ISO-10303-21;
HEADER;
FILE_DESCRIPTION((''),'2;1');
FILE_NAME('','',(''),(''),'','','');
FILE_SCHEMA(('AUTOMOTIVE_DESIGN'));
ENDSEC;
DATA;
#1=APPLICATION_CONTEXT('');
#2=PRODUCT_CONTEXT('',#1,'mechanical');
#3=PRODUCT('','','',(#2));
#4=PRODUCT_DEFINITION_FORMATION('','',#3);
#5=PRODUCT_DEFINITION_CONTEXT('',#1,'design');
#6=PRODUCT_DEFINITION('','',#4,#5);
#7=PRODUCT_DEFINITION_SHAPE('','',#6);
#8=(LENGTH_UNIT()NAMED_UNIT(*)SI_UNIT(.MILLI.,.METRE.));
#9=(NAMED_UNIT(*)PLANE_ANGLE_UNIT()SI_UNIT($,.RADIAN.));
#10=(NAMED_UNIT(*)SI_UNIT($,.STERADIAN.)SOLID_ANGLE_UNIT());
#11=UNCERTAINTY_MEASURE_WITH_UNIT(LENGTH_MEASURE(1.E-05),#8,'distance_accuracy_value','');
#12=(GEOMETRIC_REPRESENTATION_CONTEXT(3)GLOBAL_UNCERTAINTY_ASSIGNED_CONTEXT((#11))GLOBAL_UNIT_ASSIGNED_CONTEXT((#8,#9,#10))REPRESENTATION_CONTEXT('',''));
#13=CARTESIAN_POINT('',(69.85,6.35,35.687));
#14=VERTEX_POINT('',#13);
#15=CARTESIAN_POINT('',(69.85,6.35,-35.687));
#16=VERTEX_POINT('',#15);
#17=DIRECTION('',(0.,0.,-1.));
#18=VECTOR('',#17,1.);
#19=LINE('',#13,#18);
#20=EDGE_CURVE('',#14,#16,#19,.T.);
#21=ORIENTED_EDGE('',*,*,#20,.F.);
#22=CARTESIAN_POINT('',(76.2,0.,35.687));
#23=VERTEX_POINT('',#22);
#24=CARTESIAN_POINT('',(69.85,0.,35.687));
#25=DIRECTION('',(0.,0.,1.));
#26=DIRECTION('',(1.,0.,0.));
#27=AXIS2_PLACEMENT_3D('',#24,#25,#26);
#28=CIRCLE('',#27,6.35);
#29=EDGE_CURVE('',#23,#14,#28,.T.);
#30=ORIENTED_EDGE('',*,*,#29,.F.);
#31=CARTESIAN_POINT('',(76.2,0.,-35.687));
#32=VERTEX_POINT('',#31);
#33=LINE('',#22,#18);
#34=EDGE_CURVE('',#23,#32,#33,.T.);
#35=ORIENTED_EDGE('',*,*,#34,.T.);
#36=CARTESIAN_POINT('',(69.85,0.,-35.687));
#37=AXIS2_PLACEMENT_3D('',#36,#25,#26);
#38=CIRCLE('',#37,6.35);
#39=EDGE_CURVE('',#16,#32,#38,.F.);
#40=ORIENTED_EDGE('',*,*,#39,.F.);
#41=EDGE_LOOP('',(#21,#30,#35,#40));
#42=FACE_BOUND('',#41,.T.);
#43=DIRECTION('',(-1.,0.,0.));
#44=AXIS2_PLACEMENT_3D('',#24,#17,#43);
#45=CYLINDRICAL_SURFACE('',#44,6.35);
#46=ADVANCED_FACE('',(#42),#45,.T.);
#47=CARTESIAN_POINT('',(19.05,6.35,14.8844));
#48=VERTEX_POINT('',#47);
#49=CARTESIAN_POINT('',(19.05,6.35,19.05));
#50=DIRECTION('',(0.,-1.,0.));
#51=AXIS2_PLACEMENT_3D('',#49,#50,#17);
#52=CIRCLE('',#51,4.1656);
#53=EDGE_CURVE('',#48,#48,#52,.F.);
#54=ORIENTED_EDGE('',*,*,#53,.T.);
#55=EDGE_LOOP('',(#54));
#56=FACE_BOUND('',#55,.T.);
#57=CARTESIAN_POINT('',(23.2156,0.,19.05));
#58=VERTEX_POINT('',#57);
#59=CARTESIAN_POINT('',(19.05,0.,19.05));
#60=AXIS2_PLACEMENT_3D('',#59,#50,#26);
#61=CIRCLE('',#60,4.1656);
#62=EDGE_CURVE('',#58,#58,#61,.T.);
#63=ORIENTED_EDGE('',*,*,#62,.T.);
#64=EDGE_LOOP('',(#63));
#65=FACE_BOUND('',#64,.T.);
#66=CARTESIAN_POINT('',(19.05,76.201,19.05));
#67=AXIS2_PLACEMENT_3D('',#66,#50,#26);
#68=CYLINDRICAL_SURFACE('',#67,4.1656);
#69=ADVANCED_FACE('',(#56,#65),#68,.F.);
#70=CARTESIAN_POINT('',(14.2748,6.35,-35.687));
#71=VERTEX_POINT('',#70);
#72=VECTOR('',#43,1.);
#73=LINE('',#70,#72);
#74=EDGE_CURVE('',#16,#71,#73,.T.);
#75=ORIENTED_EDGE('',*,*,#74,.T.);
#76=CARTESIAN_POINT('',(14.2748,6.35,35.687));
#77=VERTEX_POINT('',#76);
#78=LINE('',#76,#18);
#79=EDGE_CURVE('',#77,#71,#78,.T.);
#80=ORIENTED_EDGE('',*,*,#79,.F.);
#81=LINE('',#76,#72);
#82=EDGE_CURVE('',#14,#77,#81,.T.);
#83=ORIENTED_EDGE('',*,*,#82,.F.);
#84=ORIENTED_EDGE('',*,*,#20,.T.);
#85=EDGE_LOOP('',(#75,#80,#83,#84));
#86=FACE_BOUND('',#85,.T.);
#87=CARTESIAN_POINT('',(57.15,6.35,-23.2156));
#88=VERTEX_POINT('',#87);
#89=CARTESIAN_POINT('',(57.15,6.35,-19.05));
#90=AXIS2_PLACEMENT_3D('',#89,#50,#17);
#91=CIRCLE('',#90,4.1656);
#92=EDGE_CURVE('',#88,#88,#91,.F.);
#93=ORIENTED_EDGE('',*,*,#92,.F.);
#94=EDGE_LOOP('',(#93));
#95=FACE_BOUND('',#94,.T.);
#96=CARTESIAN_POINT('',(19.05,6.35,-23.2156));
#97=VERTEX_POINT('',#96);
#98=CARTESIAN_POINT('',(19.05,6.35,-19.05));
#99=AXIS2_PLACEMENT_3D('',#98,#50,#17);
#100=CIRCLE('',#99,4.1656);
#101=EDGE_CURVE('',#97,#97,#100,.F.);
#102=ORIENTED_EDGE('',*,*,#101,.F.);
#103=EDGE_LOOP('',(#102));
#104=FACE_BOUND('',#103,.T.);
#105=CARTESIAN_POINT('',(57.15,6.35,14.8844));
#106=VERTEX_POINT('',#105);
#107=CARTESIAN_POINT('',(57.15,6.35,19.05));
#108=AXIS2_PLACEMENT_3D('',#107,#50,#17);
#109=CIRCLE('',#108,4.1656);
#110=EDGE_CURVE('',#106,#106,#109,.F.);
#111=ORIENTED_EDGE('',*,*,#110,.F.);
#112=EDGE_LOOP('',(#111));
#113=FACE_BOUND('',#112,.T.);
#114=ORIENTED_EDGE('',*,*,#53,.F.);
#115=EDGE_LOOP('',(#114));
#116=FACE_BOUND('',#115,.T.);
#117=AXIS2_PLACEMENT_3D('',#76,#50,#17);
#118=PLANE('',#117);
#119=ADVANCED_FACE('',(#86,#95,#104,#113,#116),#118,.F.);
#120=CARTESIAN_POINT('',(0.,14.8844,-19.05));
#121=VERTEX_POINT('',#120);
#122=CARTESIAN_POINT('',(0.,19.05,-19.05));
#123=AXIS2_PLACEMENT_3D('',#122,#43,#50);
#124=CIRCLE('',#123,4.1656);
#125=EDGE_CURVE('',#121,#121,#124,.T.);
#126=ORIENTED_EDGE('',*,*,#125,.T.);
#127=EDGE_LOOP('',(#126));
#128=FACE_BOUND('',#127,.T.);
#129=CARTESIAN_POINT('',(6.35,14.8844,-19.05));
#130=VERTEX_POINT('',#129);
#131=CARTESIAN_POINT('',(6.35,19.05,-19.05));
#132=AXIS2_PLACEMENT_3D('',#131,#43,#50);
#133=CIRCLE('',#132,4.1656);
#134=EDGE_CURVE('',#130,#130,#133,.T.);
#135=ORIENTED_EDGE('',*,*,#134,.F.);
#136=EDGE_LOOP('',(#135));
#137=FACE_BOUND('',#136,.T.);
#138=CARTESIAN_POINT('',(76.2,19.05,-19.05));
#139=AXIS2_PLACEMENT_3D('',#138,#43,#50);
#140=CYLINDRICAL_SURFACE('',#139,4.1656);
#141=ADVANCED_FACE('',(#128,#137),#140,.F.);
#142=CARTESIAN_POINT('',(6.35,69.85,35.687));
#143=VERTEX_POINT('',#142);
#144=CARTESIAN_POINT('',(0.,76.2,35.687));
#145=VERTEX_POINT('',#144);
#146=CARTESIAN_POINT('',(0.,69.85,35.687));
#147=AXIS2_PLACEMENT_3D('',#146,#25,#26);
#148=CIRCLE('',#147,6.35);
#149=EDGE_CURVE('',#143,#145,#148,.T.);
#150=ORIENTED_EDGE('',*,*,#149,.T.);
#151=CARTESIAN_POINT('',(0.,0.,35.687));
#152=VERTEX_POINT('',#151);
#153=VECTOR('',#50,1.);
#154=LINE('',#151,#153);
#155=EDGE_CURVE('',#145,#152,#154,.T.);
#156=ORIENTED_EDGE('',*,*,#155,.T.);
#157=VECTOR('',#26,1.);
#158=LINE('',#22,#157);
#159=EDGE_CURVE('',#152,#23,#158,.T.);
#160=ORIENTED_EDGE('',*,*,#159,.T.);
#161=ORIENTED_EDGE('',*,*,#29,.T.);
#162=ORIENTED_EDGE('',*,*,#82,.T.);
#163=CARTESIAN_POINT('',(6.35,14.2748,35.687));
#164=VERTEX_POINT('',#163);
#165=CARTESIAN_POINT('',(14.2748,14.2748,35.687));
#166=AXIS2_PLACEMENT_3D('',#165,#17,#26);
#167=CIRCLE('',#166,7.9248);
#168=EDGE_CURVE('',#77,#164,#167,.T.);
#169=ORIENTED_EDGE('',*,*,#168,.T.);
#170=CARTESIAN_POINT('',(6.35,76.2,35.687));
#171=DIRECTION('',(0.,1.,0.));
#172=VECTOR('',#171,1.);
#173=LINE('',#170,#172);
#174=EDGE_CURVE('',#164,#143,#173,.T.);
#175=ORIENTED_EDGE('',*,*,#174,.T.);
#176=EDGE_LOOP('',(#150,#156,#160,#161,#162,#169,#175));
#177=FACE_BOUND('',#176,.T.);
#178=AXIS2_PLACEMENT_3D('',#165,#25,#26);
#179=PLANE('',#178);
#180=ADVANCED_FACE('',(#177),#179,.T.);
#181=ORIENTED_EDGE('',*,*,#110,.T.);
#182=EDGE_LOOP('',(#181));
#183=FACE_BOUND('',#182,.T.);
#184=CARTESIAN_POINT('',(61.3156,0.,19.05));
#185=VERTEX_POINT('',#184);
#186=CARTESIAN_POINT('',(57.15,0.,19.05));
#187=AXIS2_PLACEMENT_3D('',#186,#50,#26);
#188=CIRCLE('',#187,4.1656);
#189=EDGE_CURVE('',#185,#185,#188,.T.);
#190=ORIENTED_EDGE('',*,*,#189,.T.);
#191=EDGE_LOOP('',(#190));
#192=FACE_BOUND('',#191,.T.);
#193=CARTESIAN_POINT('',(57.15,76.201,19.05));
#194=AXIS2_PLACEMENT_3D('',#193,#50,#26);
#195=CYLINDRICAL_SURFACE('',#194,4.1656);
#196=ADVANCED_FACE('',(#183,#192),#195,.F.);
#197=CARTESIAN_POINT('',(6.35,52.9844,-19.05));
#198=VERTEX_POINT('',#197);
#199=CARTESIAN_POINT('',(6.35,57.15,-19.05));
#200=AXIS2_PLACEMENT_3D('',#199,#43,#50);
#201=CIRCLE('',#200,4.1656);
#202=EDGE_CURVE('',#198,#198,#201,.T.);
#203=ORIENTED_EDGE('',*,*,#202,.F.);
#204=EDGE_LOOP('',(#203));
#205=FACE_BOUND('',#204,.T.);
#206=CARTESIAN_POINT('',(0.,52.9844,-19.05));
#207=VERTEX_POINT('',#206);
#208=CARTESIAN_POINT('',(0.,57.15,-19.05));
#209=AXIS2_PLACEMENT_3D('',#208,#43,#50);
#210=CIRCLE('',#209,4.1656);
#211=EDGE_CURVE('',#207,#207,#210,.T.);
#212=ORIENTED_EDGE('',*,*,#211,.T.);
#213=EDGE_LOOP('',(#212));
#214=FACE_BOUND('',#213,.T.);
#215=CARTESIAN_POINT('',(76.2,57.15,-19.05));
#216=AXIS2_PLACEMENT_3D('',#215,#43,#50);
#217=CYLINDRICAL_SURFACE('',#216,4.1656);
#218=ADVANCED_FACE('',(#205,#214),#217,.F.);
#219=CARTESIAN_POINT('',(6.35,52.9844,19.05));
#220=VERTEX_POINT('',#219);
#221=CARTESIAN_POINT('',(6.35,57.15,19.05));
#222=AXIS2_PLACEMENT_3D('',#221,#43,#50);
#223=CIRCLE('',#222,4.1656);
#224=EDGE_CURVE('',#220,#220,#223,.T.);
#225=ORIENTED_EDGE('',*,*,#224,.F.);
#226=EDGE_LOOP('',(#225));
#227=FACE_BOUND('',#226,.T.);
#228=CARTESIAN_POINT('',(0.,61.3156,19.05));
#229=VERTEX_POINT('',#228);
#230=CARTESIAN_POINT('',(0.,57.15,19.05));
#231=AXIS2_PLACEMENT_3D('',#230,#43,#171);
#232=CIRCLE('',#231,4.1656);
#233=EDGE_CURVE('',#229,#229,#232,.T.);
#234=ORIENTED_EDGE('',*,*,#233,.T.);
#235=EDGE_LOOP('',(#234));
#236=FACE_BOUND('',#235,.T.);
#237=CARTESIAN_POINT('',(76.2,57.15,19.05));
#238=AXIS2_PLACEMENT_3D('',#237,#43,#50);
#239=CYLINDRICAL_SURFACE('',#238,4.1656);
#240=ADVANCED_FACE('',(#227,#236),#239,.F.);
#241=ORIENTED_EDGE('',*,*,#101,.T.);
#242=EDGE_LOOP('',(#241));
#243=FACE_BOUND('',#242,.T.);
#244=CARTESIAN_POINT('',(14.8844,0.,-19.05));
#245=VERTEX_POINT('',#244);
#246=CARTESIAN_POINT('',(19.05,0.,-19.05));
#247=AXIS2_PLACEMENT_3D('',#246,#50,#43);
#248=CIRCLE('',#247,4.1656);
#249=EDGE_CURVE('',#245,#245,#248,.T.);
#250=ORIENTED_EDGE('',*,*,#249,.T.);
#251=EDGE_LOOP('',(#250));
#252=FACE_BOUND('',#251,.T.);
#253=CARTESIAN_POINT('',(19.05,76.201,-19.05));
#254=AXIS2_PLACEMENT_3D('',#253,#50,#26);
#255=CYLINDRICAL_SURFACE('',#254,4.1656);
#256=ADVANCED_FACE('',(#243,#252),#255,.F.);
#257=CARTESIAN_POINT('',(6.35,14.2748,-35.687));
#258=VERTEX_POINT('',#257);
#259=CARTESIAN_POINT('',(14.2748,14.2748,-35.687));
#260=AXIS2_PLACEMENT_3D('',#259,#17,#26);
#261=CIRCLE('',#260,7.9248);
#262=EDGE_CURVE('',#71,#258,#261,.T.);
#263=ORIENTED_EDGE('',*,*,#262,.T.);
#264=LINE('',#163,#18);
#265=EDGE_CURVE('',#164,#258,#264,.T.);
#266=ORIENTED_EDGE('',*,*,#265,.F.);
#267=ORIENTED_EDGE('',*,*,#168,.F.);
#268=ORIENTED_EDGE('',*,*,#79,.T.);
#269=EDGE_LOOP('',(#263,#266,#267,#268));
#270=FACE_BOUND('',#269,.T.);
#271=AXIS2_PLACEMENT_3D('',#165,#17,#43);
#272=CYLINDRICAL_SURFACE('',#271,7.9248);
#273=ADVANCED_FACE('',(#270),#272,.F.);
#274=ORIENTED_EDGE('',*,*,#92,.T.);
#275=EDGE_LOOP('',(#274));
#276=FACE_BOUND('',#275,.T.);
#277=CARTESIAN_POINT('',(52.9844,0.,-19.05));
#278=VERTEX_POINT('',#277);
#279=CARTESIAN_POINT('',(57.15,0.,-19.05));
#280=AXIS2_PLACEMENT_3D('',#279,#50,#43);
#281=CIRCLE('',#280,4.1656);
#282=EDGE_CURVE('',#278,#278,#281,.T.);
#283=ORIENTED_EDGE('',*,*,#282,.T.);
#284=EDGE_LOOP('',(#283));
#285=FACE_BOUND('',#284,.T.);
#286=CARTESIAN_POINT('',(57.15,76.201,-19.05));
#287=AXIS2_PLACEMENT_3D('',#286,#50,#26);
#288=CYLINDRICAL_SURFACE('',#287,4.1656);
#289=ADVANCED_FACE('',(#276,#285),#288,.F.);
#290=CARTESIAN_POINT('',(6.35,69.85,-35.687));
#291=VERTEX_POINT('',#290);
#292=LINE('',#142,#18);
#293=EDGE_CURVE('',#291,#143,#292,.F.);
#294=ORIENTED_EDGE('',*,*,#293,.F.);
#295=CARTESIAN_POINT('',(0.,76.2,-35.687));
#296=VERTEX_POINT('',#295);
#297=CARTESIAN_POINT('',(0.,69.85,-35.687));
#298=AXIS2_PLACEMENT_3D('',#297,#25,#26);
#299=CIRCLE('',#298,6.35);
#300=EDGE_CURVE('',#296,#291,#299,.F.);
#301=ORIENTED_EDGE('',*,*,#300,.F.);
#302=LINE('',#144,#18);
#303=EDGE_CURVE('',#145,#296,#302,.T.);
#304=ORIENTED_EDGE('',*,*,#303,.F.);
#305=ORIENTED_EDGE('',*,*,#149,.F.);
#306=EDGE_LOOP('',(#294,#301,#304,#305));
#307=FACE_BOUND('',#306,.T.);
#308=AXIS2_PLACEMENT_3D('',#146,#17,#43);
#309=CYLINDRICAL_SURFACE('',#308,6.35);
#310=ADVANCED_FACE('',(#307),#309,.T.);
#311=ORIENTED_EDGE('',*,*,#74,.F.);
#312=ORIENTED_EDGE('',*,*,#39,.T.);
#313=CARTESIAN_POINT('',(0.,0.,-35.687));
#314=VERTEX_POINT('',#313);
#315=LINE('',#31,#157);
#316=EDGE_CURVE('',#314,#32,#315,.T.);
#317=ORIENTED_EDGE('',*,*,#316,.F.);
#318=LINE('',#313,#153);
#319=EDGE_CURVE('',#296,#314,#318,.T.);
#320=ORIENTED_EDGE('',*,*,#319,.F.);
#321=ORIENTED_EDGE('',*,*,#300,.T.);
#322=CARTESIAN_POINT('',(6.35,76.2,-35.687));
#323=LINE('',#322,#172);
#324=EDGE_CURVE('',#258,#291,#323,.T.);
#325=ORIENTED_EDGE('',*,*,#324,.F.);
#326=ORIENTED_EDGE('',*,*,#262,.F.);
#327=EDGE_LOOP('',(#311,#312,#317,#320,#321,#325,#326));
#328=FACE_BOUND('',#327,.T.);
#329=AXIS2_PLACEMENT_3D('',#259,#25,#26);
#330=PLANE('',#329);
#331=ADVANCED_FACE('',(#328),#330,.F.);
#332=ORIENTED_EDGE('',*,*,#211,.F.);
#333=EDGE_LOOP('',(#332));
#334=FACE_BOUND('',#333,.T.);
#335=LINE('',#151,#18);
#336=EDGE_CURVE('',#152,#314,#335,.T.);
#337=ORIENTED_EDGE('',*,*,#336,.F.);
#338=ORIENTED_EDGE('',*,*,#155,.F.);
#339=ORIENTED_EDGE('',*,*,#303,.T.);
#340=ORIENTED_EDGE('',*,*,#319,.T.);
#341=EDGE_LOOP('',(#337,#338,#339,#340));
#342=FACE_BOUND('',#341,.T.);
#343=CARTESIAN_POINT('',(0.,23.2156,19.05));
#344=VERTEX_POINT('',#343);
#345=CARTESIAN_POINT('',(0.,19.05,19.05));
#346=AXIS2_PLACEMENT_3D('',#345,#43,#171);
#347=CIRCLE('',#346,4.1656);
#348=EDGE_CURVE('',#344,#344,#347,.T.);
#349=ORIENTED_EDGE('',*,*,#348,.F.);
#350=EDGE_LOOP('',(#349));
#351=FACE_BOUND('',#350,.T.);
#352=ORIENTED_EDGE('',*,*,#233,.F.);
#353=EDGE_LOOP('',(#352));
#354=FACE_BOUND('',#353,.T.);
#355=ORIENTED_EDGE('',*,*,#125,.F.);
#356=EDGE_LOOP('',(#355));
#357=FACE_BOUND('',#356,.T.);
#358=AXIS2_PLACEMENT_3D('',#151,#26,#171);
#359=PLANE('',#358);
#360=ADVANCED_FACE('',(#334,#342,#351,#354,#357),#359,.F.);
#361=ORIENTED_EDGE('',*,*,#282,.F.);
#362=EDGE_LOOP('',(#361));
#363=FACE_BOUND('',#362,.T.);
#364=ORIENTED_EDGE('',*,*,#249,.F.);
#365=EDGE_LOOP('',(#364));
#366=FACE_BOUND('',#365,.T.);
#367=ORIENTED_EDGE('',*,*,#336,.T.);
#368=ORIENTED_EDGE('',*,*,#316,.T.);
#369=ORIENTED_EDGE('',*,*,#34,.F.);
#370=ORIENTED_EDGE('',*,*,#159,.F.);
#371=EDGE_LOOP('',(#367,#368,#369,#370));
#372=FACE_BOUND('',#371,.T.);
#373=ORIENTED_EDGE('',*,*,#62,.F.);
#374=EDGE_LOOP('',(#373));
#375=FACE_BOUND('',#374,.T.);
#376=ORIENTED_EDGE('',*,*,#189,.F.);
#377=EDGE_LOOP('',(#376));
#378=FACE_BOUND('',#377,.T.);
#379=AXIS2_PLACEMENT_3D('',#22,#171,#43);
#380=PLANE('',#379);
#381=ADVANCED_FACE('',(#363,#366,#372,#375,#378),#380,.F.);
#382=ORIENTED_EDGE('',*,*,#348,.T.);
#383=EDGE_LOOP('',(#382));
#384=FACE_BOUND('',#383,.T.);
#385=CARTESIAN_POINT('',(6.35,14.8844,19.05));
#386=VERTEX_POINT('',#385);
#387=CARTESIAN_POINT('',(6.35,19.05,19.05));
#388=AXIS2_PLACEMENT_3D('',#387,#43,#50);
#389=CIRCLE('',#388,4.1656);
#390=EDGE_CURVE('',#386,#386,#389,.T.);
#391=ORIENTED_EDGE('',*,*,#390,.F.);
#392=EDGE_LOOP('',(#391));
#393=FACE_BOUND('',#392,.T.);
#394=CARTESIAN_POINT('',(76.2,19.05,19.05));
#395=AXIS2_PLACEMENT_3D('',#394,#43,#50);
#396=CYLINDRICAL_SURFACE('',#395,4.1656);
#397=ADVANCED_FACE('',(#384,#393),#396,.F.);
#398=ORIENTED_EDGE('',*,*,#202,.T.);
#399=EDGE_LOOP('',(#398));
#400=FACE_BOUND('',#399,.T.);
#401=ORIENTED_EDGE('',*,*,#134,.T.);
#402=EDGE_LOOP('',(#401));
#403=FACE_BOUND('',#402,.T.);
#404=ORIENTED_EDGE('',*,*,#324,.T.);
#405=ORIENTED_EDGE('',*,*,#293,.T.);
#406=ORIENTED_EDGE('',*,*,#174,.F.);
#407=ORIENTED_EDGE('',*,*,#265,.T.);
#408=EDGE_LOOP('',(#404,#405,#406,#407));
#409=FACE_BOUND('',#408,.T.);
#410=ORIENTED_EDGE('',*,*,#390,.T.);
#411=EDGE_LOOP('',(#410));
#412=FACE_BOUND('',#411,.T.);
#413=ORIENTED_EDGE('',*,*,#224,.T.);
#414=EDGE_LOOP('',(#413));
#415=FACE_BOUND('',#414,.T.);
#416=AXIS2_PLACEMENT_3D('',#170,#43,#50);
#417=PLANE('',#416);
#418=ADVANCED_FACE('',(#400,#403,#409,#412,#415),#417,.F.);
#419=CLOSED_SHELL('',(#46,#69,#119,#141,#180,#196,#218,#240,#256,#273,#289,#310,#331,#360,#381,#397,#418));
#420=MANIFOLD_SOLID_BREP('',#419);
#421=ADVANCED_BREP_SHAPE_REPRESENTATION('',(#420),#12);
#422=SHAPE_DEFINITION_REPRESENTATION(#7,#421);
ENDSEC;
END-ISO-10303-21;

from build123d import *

# Parameters (mm, degrees)
BOSS_EXTRUDE1_DEPTH = 35.687
FILLET1_R           = 6.35
SKETCH3_R           = 4.1656
CUT_EXTRUDE1_DEPTH  = 114.518465322
CUT_EXTRUDE2_REACH  = 115.518
SKETCH4_R           = 4.1656


with BuildPart() as part:
    # Sketch2 → Boss-Extrude1 (new, symmetric)
    with BuildSketch(Plane.XY):
        with BuildLine():
            Line((0, 0), (0, 76.2))
            Line((0, 76.2), (6.35, 76.2))
            Line((6.35, 76.2), (6.35, 14.2748))
            ThreePointArc((6.35, 14.2748), (8.67112018, 8.67112018), (14.2748, 6.35))
            Line((14.2748, 6.35), (76.2, 6.35))
            Line((76.2, 6.35), (76.2, 0))
            Line((76.2, 0), (0, 0))
        make_face()
    extrude(amount=BOSS_EXTRUDE1_DEPTH, both=True)

    # Fillet1
    fillet1_edges = [part.edges().sort_by_distance(p)[0] for p in [
        (76.2, 6.35, 0),
        (6.35, 76.2, 0),
    ]]
    fillet(fillet1_edges, radius=FILLET1_R - 0.0001)  # a hair under: the kernel refuses the full size

    # Sketch3 → Cut-Extrude1 (cut, through all)
    with BuildSketch(Plane.ZY):
        with Locations(Location((-19.05, 57.15, 0), (0, 0, 270))):
            Circle(SKETCH3_R)
        with Locations(Location((-19.05, 19.05, 0), (0, 0, 270))):
            Circle(SKETCH3_R)
        with Locations(Location((19.05, 19.05, 0), (0, 0, 270))):
            Circle(SKETCH3_R)
        with Locations(Location((19.05, 57.15, 0), (0, 0, 270))):
            Circle(SKETCH3_R)
    extrude(amount=-CUT_EXTRUDE1_DEPTH, mode=Mode.SUBTRACT)

    # Sketch4 → Cut-Extrude2 (cut, up to next)
    with BuildSketch(Plane.XZ, mode=Mode.PRIVATE) as cut_extrude2_sk1:
        with Locations((57.15, 19.05)):
            Circle(SKETCH4_R)
    cut_extrude2_tool1 = extrude(cut_extrude2_sk1.sketch, amount=-CUT_EXTRUDE2_REACH, mode=Mode.PRIVATE) & part.part
    # Sketch4 → Cut-Extrude2 (cut, up to next)
    with BuildSketch(Plane.XZ, mode=Mode.PRIVATE) as cut_extrude2_sk2:
        with Locations(Location((19.05, -19.05, 0), (0, 0, 270))):
            Circle(SKETCH4_R)
    cut_extrude2_tool2 = extrude(cut_extrude2_sk2.sketch, amount=-CUT_EXTRUDE2_REACH, mode=Mode.PRIVATE) & part.part
    # Sketch4 → Cut-Extrude2 (cut, up to next)
    with BuildSketch(Plane.XZ, mode=Mode.PRIVATE) as cut_extrude2_sk3:
        with Locations(Location((57.15, -19.05, 0), (0, 0, 270))):
            Circle(SKETCH4_R)
    cut_extrude2_tool3 = extrude(cut_extrude2_sk3.sketch, amount=-CUT_EXTRUDE2_REACH, mode=Mode.PRIVATE) & part.part
    # Sketch4 → Cut-Extrude2 (cut, up to next)
    with BuildSketch(Plane.XZ, mode=Mode.PRIVATE) as cut_extrude2_sk4:
        with Locations((19.05, 19.05)):
            Circle(SKETCH4_R)
    cut_extrude2_tool4 = extrude(cut_extrude2_sk4.sketch, amount=-CUT_EXTRUDE2_REACH, mode=Mode.PRIVATE) & part.part
    add(cut_extrude2_tool1.solids().sort_by_distance((57.15, 0, 19.05))[0], mode=Mode.SUBTRACT)
    add(cut_extrude2_tool2.solids().sort_by_distance((19.05, 0, -19.05))[0], mode=Mode.SUBTRACT)
    add(cut_extrude2_tool3.solids().sort_by_distance((57.15, 0, -19.05))[0], mode=Mode.SUBTRACT)
    add(cut_extrude2_tool4.solids().sort_by_distance((19.05, 0, 19.05))[0], mode=Mode.SUBTRACT)


solid = part.part
